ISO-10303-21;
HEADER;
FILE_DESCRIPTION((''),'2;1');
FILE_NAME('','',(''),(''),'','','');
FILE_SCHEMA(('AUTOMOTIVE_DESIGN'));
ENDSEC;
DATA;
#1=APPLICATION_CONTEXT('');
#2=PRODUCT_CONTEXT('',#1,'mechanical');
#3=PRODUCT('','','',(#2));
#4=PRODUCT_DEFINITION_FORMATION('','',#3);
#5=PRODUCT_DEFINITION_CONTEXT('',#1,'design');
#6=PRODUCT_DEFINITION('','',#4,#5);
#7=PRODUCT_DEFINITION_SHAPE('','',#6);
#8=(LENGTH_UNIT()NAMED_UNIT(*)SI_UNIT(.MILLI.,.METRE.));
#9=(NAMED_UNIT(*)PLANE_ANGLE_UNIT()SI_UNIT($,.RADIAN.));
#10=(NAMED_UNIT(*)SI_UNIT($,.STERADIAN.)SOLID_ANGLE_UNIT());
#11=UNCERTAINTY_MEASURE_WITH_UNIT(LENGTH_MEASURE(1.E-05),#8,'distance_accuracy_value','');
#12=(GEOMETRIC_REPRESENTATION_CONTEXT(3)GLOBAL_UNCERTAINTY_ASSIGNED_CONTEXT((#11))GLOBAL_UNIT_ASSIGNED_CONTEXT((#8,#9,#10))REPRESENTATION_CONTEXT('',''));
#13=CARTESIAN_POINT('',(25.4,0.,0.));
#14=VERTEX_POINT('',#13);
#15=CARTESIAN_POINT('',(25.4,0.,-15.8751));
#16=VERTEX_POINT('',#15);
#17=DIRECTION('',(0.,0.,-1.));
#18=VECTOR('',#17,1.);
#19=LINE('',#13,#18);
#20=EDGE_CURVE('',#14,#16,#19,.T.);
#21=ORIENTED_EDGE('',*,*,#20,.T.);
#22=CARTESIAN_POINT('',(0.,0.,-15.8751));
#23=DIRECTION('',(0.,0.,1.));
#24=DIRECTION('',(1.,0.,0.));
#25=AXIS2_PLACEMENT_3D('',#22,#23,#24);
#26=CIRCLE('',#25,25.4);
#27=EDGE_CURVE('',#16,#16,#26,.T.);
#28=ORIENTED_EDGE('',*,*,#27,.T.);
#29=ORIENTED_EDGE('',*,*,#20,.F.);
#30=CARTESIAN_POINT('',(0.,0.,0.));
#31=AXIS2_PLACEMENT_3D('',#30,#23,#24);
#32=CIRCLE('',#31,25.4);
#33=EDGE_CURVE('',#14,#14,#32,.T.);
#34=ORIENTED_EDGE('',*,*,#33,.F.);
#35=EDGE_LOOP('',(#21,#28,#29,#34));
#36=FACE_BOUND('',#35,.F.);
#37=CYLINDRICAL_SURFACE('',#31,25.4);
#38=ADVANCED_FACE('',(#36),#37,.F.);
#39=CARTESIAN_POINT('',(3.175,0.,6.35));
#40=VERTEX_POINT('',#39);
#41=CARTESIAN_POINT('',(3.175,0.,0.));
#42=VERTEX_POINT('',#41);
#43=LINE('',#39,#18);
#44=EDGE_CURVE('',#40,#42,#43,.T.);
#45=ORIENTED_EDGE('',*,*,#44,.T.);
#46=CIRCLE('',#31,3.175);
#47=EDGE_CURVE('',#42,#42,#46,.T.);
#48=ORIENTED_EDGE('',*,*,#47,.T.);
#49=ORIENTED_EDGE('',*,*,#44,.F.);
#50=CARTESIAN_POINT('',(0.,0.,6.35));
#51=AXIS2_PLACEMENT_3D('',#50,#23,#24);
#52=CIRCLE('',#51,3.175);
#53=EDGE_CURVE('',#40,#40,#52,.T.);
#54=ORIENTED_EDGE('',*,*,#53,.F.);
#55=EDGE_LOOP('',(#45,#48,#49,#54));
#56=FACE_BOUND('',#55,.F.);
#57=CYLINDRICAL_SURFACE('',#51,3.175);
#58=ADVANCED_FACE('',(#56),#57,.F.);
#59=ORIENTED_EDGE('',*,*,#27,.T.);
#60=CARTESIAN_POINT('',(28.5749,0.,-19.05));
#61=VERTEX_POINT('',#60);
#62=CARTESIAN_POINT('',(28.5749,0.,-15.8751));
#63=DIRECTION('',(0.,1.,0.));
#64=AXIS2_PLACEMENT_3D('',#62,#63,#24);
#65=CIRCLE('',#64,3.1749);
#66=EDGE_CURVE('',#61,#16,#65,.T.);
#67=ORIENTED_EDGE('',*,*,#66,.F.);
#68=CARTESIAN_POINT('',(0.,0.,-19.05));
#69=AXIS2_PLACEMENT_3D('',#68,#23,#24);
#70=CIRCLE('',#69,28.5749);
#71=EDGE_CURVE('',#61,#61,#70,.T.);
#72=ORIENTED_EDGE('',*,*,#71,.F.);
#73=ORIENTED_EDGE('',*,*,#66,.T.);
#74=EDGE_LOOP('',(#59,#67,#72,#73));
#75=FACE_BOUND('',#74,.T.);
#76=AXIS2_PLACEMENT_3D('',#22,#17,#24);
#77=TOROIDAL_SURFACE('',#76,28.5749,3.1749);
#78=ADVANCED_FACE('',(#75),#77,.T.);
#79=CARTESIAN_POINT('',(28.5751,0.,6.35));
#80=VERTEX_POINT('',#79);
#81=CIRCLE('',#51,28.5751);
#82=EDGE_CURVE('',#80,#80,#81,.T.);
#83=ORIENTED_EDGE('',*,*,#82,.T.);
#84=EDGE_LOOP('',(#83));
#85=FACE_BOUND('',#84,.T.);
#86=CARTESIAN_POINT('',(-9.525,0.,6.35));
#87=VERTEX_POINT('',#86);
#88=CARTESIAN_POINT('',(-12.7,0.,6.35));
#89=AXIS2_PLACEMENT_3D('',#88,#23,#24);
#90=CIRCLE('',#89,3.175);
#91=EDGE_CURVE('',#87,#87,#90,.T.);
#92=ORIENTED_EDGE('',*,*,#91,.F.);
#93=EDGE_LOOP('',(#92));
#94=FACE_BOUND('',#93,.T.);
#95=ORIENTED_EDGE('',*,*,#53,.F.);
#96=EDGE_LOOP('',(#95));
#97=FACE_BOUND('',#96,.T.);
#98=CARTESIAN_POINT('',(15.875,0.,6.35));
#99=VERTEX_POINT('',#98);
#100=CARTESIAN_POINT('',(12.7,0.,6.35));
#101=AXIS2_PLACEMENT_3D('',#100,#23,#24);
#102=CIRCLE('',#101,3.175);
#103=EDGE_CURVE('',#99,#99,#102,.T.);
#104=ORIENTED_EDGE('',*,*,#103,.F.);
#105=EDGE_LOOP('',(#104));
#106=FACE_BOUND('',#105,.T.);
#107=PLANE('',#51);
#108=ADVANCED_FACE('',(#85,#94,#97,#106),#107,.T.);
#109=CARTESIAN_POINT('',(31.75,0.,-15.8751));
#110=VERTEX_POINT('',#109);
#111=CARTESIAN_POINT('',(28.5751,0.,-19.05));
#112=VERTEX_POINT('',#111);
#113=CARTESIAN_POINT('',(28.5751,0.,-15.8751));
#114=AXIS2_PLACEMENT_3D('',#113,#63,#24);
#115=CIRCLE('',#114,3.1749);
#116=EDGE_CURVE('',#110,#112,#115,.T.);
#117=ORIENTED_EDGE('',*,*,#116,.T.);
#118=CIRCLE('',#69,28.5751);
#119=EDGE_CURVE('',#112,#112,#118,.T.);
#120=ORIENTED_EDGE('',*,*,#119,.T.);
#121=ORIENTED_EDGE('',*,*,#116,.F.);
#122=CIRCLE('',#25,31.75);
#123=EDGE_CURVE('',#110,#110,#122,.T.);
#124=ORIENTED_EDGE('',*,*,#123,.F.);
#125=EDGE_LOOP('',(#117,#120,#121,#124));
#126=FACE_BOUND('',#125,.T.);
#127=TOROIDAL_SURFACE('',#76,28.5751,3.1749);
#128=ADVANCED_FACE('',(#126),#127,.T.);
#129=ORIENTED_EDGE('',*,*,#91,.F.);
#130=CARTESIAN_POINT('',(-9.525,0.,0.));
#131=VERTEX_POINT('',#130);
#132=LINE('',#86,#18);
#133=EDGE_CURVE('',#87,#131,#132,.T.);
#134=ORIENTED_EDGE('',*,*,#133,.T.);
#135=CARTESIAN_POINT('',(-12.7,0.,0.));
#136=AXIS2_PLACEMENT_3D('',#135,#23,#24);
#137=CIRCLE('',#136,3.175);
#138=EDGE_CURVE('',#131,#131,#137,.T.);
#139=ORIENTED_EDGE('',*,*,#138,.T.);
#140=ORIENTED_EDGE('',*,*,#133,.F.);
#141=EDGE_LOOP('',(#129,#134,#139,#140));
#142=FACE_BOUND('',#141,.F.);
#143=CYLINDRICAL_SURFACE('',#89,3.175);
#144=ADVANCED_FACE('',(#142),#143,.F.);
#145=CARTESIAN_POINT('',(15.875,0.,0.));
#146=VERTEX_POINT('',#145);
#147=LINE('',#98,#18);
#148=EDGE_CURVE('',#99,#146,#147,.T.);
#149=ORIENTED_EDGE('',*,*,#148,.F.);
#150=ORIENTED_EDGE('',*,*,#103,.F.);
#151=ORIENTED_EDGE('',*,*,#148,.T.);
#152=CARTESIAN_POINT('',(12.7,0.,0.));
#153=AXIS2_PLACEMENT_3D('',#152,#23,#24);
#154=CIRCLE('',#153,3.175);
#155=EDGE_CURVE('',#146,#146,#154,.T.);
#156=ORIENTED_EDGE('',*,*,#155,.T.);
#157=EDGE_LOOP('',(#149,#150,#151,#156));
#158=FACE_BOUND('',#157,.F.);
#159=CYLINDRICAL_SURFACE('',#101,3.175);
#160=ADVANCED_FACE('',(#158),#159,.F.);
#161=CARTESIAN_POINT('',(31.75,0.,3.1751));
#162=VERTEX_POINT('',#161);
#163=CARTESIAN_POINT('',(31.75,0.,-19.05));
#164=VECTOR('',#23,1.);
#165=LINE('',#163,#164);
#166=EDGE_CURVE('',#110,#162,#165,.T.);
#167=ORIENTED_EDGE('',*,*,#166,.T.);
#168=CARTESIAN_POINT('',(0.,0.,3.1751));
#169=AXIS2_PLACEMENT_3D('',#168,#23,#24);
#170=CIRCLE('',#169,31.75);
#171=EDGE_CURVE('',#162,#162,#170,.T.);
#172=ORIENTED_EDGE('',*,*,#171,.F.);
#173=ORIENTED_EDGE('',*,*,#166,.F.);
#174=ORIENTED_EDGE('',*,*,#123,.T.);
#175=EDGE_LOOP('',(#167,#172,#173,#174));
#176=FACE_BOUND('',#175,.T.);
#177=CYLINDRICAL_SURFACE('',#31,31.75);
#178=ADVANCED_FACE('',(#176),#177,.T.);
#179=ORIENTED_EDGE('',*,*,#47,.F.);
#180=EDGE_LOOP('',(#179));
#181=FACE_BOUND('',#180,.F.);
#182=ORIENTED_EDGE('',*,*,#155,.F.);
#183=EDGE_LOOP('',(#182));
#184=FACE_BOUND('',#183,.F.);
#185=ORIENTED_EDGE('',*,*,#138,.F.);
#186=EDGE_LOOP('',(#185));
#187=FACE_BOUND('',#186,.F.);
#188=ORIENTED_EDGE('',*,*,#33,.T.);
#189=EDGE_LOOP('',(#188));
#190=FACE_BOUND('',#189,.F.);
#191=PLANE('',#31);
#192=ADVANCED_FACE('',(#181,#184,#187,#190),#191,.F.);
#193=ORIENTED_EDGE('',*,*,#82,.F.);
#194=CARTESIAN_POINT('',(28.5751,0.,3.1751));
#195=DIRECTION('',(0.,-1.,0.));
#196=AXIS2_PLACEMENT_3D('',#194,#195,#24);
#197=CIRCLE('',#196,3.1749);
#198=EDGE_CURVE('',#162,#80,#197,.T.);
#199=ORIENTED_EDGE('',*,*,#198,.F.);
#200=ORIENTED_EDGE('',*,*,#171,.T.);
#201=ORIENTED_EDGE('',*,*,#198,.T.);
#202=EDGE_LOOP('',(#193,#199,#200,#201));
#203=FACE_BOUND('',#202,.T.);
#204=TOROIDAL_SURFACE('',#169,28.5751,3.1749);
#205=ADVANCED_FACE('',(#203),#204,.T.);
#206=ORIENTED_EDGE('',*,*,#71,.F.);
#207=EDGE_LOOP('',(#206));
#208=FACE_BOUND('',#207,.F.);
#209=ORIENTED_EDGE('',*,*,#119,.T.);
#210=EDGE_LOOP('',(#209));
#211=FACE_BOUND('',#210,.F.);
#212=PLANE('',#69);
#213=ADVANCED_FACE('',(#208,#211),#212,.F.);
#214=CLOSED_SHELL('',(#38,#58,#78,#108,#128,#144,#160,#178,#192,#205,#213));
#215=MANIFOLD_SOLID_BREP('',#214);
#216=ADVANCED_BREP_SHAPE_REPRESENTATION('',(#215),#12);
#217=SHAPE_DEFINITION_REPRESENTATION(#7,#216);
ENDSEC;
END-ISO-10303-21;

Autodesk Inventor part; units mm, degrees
ref_plane "YZ Plane" through (0, 0, 0) normal (1, 0, 0) x (0, 1, 0)
ref_plane "XZ Plane" through (0, 0, 0) normal (0, 1, 0) x (-1, 0, 0)
ref_plane "XY Plane" through (0, 0, 0) normal (0, 0, 1) x (1, 0, 0)
sketch "Sketch1" plane through (0, 0, 0) normal (0, 0, 1) x (1, 0, 0)
  circle A0 centre (0, 0) radius 25.4
  circle A1 centre (0, 0) radius 31.75
  dimension "d1" = 50.8
  dimension "d2" = 6.35
extrude "Ring" add sketch "Sketch1" against normal blind 19.05
extrude "Back" add sketch "Sketch1" along normal blind 6.35 contours A0 | A1
sketch "Sketch2" plane through (0, 0, 6.35) normal (0, 0, 1) x (1, 0, 0)
  circle A0 centre (0, 0) radius 3.175
  circle A1 centre (-12.7, 0) radius 3.175
  circle A2 centre (12.7, 0) radius 3.175
  line L0 (-12.7, 0) -> (12.7, 0) construction
  dimension "d7" = 6.35
  dimension "d8" = 12.7
  dimension "d11" = 12.7
extrude "Holes" cut sketch "Sketch2" against normal through all
fillet "Fillets" radius 3.175 3 edges at (-31.75, 0, 6.35) (-31.75, 0, -19.05) (-25.4, 0, -19.05)
properties part number "friction-fit"
